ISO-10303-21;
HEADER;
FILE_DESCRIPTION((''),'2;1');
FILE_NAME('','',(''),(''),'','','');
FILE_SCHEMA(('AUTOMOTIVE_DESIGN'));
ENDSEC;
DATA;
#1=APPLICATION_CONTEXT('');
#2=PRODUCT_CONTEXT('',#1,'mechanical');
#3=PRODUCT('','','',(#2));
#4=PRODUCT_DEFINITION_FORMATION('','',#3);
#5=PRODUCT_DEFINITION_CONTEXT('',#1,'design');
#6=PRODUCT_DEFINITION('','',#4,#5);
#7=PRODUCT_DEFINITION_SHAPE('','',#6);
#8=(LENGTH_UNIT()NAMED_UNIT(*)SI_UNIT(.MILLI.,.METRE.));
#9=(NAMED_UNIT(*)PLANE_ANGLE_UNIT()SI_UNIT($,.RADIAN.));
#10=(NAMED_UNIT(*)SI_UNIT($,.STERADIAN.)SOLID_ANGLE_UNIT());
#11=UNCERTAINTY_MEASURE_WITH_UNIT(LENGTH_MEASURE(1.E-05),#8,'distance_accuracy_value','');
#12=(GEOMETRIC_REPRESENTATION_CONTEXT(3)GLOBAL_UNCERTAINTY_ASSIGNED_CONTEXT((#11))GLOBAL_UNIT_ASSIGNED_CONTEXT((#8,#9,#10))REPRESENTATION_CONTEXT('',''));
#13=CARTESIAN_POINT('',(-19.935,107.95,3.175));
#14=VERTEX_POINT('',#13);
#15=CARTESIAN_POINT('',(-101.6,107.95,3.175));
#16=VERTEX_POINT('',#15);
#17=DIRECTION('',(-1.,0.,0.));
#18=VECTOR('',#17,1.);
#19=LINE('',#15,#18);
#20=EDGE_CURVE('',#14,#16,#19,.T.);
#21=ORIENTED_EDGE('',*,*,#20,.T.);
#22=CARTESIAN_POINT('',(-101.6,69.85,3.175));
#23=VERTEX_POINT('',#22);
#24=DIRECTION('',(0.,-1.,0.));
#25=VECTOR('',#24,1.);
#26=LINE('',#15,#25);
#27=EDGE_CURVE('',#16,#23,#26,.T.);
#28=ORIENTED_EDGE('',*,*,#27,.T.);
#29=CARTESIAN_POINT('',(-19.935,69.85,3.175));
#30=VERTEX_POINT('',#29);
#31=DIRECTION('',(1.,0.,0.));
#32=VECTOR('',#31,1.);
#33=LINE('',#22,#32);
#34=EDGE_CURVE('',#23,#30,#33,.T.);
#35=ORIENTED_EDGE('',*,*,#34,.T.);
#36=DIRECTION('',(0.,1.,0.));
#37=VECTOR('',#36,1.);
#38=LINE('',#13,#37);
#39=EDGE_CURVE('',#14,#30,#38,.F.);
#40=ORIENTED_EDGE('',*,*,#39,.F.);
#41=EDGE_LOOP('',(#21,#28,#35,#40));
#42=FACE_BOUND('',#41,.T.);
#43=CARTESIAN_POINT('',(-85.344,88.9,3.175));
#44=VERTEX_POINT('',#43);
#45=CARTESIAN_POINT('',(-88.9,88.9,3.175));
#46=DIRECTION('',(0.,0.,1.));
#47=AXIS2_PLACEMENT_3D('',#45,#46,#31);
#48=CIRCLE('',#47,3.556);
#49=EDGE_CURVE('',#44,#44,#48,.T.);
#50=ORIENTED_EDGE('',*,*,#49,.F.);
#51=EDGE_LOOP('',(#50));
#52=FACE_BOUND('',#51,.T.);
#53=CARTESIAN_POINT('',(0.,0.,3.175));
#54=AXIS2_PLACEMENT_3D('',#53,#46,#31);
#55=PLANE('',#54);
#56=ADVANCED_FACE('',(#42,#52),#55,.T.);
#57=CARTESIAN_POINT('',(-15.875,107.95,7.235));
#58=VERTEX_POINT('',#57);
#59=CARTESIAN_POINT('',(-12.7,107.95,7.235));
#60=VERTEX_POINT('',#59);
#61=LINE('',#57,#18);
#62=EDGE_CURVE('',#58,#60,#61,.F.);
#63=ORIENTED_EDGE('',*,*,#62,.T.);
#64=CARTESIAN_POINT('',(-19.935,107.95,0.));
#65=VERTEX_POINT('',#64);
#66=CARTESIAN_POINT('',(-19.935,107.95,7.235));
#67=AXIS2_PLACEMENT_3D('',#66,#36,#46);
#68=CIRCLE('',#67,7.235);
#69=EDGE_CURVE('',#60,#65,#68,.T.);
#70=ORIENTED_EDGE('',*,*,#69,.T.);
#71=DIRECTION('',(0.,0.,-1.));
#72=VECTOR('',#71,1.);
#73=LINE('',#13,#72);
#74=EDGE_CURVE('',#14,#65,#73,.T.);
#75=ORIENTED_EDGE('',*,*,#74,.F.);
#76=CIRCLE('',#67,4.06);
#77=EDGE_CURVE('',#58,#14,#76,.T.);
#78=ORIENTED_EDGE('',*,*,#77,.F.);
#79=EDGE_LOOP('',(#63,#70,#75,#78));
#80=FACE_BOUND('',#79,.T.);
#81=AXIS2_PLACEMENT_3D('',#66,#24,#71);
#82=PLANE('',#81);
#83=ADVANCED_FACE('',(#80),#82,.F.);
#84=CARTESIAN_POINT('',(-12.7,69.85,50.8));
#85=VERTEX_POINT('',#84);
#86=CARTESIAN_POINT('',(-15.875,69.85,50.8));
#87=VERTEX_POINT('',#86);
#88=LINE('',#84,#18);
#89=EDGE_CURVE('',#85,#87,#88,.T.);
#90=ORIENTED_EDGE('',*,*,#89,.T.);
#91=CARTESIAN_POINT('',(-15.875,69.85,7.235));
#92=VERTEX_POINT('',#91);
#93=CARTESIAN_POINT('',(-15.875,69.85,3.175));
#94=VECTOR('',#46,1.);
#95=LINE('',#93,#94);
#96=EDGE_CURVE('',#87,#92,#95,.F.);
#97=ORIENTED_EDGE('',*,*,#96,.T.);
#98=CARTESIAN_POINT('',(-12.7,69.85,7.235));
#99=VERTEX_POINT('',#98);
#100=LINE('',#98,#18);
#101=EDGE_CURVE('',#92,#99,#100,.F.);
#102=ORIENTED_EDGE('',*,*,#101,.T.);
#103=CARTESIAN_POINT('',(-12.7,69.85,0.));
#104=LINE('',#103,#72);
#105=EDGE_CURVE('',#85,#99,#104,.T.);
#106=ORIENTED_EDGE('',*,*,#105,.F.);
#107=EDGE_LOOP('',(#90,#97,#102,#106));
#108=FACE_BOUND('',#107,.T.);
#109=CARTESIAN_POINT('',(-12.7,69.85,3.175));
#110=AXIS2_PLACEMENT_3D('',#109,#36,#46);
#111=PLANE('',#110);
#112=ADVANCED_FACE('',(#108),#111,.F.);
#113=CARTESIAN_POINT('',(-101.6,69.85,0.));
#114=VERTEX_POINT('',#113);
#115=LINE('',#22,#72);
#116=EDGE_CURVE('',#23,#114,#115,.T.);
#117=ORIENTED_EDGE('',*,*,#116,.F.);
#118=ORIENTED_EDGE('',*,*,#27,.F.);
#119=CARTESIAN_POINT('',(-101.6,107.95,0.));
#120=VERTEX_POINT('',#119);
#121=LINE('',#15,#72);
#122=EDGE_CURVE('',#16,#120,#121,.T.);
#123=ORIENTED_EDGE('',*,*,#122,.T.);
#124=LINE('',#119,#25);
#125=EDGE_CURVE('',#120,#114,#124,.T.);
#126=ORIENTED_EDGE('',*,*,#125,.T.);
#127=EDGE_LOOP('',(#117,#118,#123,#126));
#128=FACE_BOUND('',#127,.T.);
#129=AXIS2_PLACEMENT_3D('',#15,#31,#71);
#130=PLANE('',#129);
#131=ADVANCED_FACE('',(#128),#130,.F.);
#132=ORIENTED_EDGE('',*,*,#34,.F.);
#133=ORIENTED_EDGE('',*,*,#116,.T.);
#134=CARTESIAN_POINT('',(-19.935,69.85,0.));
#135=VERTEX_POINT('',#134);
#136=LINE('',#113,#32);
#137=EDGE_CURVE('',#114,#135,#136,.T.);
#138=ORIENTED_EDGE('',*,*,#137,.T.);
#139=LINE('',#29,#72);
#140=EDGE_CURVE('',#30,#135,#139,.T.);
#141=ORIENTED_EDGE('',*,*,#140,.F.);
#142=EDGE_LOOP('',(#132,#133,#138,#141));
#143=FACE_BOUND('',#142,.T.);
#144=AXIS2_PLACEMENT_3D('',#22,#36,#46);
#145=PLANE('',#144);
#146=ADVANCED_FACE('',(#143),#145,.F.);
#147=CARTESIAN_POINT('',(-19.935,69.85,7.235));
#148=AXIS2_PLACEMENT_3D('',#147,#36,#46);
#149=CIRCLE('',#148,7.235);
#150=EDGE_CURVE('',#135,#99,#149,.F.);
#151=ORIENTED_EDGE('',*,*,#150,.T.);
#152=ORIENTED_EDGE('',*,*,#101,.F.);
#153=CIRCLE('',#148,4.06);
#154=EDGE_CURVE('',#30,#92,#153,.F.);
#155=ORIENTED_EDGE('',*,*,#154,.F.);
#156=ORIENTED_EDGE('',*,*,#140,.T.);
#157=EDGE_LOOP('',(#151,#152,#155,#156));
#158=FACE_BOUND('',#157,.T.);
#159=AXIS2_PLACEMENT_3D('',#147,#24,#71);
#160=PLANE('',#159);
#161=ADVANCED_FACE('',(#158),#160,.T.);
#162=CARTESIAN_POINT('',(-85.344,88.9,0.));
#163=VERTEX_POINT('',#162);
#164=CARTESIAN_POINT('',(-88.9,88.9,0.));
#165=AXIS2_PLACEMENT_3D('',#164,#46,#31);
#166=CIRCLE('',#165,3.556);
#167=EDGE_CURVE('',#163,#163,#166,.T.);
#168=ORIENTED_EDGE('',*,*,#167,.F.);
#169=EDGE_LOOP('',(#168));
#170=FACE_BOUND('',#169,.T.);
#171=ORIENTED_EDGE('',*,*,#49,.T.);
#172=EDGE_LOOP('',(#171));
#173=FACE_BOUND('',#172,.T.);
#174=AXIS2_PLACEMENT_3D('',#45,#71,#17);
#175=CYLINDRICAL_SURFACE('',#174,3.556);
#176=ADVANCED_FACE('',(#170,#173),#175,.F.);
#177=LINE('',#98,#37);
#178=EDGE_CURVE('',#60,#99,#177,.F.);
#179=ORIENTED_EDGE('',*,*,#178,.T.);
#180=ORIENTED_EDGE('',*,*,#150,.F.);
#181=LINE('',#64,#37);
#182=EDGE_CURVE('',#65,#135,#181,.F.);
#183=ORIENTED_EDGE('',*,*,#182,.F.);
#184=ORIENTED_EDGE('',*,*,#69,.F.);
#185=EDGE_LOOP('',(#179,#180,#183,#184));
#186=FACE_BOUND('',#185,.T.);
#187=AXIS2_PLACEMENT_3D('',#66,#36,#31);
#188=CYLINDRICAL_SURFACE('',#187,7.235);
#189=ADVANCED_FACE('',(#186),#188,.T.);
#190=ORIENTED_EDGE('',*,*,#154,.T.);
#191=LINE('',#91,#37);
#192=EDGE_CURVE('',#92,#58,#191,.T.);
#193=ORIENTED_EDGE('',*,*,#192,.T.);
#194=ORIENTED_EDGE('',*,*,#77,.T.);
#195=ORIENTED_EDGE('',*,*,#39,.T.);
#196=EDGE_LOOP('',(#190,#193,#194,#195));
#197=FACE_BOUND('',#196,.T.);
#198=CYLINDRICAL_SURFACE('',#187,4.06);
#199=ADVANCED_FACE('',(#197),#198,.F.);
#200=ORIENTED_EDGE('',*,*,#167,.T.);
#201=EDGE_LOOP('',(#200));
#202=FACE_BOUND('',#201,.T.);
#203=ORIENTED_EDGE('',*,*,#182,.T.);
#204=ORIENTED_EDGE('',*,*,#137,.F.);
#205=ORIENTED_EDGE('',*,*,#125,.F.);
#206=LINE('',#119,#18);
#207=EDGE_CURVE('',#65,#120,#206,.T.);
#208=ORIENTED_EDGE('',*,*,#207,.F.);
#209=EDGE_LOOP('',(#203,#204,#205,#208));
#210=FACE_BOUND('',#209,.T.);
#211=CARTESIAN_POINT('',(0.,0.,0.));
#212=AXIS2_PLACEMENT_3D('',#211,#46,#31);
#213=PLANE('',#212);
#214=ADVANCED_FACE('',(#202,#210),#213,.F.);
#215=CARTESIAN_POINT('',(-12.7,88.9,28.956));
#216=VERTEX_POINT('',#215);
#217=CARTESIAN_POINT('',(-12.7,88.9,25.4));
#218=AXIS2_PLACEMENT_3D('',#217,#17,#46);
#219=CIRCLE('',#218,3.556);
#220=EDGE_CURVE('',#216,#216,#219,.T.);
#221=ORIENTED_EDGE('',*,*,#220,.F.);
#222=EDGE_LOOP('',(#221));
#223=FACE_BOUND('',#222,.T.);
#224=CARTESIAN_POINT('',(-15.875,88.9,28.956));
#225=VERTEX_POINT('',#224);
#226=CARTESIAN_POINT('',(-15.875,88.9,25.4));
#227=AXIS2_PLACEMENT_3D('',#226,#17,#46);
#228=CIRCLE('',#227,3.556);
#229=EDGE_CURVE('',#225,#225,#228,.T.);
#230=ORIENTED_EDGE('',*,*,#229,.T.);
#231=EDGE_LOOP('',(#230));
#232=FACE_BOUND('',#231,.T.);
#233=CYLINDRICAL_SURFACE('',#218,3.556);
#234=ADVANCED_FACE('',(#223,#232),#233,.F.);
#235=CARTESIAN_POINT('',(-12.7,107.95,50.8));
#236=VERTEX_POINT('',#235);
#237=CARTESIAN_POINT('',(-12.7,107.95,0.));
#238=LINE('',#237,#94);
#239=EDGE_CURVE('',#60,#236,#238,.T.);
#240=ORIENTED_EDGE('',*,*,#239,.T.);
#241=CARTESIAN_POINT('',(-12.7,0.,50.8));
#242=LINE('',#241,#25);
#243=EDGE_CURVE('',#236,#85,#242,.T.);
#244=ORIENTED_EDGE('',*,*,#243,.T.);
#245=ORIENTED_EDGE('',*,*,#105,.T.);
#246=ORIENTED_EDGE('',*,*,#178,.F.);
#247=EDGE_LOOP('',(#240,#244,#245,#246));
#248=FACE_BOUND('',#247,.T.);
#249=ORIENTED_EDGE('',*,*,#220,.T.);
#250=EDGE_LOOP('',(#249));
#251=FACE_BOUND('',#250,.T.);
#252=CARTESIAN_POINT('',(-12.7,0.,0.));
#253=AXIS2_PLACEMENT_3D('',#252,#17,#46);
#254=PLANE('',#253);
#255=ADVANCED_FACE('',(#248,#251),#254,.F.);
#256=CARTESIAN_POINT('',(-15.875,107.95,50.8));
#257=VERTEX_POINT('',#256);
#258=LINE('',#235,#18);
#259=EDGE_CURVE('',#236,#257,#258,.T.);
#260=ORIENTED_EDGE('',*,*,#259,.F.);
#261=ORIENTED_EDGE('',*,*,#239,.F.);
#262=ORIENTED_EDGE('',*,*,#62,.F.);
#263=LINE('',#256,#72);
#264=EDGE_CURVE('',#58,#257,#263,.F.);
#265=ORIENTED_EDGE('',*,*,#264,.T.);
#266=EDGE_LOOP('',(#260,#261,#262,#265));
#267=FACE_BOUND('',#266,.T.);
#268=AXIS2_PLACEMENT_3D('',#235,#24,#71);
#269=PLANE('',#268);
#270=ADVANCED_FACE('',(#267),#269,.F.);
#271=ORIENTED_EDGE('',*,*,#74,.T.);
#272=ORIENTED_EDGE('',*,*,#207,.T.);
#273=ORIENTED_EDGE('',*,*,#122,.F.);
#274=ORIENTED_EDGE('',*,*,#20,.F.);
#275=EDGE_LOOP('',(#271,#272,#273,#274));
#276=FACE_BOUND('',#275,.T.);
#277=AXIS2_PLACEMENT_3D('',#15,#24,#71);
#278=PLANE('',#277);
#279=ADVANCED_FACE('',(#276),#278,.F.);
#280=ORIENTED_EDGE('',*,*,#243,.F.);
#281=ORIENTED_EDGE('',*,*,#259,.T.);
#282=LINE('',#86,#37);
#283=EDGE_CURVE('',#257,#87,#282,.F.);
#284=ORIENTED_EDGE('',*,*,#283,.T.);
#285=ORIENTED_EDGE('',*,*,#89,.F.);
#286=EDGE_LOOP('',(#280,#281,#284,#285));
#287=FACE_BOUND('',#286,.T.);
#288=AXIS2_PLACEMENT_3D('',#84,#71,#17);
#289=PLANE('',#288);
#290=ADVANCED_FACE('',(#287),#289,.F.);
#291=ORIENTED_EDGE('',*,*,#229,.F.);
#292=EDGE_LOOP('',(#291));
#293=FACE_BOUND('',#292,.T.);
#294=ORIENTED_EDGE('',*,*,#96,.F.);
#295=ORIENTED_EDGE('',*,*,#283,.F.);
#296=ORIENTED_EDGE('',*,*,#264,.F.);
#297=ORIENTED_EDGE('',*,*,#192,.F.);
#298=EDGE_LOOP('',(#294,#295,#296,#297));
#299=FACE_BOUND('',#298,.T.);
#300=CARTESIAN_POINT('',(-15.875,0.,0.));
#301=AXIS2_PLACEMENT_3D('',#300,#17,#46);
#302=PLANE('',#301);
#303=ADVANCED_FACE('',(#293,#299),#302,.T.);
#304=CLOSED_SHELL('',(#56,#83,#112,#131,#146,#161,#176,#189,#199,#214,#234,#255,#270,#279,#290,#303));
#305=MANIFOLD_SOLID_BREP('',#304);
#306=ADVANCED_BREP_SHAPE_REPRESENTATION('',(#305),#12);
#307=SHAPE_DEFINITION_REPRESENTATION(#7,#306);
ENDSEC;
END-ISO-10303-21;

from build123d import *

# Parameters (mm, degrees)
SKETCH1_W                    = 88.9
SKETCH1_H                    = 38.1
SKETCH1_R                    = 3.556
BASE_FLANGE1_DEPTH           = 3.175
EDGE_FLANGE1_STRIP_W         = 20.82
EDGE_FLANGE1_STRIP_H         = 3.175
EDGE_FLANGE1_STRIP_CUT_DEPTH = 38.1
EDGE_FLANGE1_DEPTH           = 38.1
SKETCH9_R                    = 3.556
CUT_EXTRUDE1_DEPTH           = 147.910238326


# Sheet-metal steps are written as plain solids
with BuildPart() as part:
    # Sketch1 → Base-Flange1 (new body)
    with BuildSketch(Plane.XY):
        with Locations((-57.15, 88.9)):
            Rectangle(SKETCH1_W, SKETCH1_H)
        with Locations((-88.9, 88.9)):
            Circle(SKETCH1_R, mode=Mode.SUBTRACT)
    extrude(amount=BASE_FLANGE1_DEPTH)

    # Edge-Flange1 strip (across the edge) → Edge-Flange1 strip cut (cut)
    with BuildSketch(Plane(origin=(-12.7, 69.85, 3.175), x_dir=(-1, 0, 0), z_dir=(0, 1, 0))):
        with Locations((-3.175, -1.5875)):
            Rectangle(EDGE_FLANGE1_STRIP_W, EDGE_FLANGE1_STRIP_H)
    extrude(amount=EDGE_FLANGE1_STRIP_CUT_DEPTH, mode=Mode.SUBTRACT)

    # Edge-Flange1 section (across the edge) → Edge-Flange1 (add)
    with BuildSketch(Plane(origin=(-12.7, 69.85, 3.175), x_dir=(-1, 0, 0), z_dir=(0, 1, 0))):
        with BuildLine():
            Line((0, 4.06), (0, 47.625))
            Line((0, 47.625), (3.175, 47.625))
            Line((3.175, 47.625), (3.175, 4.06))
            ThreePointArc((3.175, 4.06), (4.364146468, 1.189146468), (7.235, 0))
            Line((7.235, 0), (7.235, -3.175))
            ThreePointArc((7.235, -3.175), (2.119082438, -1.055917562), (0, 4.06))
        make_face()
    extrude(amount=EDGE_FLANGE1_DEPTH)

    # Sketch9 → Cut-Extrude1 (cut, through all)
    with BuildSketch(Plane.ZY.offset(15.875)):
        with Locations((25.4, 88.9)):
            Circle(SKETCH9_R)
    extrude(amount=-CUT_EXTRUDE1_DEPTH, mode=Mode.SUBTRACT)


solid = part.part
